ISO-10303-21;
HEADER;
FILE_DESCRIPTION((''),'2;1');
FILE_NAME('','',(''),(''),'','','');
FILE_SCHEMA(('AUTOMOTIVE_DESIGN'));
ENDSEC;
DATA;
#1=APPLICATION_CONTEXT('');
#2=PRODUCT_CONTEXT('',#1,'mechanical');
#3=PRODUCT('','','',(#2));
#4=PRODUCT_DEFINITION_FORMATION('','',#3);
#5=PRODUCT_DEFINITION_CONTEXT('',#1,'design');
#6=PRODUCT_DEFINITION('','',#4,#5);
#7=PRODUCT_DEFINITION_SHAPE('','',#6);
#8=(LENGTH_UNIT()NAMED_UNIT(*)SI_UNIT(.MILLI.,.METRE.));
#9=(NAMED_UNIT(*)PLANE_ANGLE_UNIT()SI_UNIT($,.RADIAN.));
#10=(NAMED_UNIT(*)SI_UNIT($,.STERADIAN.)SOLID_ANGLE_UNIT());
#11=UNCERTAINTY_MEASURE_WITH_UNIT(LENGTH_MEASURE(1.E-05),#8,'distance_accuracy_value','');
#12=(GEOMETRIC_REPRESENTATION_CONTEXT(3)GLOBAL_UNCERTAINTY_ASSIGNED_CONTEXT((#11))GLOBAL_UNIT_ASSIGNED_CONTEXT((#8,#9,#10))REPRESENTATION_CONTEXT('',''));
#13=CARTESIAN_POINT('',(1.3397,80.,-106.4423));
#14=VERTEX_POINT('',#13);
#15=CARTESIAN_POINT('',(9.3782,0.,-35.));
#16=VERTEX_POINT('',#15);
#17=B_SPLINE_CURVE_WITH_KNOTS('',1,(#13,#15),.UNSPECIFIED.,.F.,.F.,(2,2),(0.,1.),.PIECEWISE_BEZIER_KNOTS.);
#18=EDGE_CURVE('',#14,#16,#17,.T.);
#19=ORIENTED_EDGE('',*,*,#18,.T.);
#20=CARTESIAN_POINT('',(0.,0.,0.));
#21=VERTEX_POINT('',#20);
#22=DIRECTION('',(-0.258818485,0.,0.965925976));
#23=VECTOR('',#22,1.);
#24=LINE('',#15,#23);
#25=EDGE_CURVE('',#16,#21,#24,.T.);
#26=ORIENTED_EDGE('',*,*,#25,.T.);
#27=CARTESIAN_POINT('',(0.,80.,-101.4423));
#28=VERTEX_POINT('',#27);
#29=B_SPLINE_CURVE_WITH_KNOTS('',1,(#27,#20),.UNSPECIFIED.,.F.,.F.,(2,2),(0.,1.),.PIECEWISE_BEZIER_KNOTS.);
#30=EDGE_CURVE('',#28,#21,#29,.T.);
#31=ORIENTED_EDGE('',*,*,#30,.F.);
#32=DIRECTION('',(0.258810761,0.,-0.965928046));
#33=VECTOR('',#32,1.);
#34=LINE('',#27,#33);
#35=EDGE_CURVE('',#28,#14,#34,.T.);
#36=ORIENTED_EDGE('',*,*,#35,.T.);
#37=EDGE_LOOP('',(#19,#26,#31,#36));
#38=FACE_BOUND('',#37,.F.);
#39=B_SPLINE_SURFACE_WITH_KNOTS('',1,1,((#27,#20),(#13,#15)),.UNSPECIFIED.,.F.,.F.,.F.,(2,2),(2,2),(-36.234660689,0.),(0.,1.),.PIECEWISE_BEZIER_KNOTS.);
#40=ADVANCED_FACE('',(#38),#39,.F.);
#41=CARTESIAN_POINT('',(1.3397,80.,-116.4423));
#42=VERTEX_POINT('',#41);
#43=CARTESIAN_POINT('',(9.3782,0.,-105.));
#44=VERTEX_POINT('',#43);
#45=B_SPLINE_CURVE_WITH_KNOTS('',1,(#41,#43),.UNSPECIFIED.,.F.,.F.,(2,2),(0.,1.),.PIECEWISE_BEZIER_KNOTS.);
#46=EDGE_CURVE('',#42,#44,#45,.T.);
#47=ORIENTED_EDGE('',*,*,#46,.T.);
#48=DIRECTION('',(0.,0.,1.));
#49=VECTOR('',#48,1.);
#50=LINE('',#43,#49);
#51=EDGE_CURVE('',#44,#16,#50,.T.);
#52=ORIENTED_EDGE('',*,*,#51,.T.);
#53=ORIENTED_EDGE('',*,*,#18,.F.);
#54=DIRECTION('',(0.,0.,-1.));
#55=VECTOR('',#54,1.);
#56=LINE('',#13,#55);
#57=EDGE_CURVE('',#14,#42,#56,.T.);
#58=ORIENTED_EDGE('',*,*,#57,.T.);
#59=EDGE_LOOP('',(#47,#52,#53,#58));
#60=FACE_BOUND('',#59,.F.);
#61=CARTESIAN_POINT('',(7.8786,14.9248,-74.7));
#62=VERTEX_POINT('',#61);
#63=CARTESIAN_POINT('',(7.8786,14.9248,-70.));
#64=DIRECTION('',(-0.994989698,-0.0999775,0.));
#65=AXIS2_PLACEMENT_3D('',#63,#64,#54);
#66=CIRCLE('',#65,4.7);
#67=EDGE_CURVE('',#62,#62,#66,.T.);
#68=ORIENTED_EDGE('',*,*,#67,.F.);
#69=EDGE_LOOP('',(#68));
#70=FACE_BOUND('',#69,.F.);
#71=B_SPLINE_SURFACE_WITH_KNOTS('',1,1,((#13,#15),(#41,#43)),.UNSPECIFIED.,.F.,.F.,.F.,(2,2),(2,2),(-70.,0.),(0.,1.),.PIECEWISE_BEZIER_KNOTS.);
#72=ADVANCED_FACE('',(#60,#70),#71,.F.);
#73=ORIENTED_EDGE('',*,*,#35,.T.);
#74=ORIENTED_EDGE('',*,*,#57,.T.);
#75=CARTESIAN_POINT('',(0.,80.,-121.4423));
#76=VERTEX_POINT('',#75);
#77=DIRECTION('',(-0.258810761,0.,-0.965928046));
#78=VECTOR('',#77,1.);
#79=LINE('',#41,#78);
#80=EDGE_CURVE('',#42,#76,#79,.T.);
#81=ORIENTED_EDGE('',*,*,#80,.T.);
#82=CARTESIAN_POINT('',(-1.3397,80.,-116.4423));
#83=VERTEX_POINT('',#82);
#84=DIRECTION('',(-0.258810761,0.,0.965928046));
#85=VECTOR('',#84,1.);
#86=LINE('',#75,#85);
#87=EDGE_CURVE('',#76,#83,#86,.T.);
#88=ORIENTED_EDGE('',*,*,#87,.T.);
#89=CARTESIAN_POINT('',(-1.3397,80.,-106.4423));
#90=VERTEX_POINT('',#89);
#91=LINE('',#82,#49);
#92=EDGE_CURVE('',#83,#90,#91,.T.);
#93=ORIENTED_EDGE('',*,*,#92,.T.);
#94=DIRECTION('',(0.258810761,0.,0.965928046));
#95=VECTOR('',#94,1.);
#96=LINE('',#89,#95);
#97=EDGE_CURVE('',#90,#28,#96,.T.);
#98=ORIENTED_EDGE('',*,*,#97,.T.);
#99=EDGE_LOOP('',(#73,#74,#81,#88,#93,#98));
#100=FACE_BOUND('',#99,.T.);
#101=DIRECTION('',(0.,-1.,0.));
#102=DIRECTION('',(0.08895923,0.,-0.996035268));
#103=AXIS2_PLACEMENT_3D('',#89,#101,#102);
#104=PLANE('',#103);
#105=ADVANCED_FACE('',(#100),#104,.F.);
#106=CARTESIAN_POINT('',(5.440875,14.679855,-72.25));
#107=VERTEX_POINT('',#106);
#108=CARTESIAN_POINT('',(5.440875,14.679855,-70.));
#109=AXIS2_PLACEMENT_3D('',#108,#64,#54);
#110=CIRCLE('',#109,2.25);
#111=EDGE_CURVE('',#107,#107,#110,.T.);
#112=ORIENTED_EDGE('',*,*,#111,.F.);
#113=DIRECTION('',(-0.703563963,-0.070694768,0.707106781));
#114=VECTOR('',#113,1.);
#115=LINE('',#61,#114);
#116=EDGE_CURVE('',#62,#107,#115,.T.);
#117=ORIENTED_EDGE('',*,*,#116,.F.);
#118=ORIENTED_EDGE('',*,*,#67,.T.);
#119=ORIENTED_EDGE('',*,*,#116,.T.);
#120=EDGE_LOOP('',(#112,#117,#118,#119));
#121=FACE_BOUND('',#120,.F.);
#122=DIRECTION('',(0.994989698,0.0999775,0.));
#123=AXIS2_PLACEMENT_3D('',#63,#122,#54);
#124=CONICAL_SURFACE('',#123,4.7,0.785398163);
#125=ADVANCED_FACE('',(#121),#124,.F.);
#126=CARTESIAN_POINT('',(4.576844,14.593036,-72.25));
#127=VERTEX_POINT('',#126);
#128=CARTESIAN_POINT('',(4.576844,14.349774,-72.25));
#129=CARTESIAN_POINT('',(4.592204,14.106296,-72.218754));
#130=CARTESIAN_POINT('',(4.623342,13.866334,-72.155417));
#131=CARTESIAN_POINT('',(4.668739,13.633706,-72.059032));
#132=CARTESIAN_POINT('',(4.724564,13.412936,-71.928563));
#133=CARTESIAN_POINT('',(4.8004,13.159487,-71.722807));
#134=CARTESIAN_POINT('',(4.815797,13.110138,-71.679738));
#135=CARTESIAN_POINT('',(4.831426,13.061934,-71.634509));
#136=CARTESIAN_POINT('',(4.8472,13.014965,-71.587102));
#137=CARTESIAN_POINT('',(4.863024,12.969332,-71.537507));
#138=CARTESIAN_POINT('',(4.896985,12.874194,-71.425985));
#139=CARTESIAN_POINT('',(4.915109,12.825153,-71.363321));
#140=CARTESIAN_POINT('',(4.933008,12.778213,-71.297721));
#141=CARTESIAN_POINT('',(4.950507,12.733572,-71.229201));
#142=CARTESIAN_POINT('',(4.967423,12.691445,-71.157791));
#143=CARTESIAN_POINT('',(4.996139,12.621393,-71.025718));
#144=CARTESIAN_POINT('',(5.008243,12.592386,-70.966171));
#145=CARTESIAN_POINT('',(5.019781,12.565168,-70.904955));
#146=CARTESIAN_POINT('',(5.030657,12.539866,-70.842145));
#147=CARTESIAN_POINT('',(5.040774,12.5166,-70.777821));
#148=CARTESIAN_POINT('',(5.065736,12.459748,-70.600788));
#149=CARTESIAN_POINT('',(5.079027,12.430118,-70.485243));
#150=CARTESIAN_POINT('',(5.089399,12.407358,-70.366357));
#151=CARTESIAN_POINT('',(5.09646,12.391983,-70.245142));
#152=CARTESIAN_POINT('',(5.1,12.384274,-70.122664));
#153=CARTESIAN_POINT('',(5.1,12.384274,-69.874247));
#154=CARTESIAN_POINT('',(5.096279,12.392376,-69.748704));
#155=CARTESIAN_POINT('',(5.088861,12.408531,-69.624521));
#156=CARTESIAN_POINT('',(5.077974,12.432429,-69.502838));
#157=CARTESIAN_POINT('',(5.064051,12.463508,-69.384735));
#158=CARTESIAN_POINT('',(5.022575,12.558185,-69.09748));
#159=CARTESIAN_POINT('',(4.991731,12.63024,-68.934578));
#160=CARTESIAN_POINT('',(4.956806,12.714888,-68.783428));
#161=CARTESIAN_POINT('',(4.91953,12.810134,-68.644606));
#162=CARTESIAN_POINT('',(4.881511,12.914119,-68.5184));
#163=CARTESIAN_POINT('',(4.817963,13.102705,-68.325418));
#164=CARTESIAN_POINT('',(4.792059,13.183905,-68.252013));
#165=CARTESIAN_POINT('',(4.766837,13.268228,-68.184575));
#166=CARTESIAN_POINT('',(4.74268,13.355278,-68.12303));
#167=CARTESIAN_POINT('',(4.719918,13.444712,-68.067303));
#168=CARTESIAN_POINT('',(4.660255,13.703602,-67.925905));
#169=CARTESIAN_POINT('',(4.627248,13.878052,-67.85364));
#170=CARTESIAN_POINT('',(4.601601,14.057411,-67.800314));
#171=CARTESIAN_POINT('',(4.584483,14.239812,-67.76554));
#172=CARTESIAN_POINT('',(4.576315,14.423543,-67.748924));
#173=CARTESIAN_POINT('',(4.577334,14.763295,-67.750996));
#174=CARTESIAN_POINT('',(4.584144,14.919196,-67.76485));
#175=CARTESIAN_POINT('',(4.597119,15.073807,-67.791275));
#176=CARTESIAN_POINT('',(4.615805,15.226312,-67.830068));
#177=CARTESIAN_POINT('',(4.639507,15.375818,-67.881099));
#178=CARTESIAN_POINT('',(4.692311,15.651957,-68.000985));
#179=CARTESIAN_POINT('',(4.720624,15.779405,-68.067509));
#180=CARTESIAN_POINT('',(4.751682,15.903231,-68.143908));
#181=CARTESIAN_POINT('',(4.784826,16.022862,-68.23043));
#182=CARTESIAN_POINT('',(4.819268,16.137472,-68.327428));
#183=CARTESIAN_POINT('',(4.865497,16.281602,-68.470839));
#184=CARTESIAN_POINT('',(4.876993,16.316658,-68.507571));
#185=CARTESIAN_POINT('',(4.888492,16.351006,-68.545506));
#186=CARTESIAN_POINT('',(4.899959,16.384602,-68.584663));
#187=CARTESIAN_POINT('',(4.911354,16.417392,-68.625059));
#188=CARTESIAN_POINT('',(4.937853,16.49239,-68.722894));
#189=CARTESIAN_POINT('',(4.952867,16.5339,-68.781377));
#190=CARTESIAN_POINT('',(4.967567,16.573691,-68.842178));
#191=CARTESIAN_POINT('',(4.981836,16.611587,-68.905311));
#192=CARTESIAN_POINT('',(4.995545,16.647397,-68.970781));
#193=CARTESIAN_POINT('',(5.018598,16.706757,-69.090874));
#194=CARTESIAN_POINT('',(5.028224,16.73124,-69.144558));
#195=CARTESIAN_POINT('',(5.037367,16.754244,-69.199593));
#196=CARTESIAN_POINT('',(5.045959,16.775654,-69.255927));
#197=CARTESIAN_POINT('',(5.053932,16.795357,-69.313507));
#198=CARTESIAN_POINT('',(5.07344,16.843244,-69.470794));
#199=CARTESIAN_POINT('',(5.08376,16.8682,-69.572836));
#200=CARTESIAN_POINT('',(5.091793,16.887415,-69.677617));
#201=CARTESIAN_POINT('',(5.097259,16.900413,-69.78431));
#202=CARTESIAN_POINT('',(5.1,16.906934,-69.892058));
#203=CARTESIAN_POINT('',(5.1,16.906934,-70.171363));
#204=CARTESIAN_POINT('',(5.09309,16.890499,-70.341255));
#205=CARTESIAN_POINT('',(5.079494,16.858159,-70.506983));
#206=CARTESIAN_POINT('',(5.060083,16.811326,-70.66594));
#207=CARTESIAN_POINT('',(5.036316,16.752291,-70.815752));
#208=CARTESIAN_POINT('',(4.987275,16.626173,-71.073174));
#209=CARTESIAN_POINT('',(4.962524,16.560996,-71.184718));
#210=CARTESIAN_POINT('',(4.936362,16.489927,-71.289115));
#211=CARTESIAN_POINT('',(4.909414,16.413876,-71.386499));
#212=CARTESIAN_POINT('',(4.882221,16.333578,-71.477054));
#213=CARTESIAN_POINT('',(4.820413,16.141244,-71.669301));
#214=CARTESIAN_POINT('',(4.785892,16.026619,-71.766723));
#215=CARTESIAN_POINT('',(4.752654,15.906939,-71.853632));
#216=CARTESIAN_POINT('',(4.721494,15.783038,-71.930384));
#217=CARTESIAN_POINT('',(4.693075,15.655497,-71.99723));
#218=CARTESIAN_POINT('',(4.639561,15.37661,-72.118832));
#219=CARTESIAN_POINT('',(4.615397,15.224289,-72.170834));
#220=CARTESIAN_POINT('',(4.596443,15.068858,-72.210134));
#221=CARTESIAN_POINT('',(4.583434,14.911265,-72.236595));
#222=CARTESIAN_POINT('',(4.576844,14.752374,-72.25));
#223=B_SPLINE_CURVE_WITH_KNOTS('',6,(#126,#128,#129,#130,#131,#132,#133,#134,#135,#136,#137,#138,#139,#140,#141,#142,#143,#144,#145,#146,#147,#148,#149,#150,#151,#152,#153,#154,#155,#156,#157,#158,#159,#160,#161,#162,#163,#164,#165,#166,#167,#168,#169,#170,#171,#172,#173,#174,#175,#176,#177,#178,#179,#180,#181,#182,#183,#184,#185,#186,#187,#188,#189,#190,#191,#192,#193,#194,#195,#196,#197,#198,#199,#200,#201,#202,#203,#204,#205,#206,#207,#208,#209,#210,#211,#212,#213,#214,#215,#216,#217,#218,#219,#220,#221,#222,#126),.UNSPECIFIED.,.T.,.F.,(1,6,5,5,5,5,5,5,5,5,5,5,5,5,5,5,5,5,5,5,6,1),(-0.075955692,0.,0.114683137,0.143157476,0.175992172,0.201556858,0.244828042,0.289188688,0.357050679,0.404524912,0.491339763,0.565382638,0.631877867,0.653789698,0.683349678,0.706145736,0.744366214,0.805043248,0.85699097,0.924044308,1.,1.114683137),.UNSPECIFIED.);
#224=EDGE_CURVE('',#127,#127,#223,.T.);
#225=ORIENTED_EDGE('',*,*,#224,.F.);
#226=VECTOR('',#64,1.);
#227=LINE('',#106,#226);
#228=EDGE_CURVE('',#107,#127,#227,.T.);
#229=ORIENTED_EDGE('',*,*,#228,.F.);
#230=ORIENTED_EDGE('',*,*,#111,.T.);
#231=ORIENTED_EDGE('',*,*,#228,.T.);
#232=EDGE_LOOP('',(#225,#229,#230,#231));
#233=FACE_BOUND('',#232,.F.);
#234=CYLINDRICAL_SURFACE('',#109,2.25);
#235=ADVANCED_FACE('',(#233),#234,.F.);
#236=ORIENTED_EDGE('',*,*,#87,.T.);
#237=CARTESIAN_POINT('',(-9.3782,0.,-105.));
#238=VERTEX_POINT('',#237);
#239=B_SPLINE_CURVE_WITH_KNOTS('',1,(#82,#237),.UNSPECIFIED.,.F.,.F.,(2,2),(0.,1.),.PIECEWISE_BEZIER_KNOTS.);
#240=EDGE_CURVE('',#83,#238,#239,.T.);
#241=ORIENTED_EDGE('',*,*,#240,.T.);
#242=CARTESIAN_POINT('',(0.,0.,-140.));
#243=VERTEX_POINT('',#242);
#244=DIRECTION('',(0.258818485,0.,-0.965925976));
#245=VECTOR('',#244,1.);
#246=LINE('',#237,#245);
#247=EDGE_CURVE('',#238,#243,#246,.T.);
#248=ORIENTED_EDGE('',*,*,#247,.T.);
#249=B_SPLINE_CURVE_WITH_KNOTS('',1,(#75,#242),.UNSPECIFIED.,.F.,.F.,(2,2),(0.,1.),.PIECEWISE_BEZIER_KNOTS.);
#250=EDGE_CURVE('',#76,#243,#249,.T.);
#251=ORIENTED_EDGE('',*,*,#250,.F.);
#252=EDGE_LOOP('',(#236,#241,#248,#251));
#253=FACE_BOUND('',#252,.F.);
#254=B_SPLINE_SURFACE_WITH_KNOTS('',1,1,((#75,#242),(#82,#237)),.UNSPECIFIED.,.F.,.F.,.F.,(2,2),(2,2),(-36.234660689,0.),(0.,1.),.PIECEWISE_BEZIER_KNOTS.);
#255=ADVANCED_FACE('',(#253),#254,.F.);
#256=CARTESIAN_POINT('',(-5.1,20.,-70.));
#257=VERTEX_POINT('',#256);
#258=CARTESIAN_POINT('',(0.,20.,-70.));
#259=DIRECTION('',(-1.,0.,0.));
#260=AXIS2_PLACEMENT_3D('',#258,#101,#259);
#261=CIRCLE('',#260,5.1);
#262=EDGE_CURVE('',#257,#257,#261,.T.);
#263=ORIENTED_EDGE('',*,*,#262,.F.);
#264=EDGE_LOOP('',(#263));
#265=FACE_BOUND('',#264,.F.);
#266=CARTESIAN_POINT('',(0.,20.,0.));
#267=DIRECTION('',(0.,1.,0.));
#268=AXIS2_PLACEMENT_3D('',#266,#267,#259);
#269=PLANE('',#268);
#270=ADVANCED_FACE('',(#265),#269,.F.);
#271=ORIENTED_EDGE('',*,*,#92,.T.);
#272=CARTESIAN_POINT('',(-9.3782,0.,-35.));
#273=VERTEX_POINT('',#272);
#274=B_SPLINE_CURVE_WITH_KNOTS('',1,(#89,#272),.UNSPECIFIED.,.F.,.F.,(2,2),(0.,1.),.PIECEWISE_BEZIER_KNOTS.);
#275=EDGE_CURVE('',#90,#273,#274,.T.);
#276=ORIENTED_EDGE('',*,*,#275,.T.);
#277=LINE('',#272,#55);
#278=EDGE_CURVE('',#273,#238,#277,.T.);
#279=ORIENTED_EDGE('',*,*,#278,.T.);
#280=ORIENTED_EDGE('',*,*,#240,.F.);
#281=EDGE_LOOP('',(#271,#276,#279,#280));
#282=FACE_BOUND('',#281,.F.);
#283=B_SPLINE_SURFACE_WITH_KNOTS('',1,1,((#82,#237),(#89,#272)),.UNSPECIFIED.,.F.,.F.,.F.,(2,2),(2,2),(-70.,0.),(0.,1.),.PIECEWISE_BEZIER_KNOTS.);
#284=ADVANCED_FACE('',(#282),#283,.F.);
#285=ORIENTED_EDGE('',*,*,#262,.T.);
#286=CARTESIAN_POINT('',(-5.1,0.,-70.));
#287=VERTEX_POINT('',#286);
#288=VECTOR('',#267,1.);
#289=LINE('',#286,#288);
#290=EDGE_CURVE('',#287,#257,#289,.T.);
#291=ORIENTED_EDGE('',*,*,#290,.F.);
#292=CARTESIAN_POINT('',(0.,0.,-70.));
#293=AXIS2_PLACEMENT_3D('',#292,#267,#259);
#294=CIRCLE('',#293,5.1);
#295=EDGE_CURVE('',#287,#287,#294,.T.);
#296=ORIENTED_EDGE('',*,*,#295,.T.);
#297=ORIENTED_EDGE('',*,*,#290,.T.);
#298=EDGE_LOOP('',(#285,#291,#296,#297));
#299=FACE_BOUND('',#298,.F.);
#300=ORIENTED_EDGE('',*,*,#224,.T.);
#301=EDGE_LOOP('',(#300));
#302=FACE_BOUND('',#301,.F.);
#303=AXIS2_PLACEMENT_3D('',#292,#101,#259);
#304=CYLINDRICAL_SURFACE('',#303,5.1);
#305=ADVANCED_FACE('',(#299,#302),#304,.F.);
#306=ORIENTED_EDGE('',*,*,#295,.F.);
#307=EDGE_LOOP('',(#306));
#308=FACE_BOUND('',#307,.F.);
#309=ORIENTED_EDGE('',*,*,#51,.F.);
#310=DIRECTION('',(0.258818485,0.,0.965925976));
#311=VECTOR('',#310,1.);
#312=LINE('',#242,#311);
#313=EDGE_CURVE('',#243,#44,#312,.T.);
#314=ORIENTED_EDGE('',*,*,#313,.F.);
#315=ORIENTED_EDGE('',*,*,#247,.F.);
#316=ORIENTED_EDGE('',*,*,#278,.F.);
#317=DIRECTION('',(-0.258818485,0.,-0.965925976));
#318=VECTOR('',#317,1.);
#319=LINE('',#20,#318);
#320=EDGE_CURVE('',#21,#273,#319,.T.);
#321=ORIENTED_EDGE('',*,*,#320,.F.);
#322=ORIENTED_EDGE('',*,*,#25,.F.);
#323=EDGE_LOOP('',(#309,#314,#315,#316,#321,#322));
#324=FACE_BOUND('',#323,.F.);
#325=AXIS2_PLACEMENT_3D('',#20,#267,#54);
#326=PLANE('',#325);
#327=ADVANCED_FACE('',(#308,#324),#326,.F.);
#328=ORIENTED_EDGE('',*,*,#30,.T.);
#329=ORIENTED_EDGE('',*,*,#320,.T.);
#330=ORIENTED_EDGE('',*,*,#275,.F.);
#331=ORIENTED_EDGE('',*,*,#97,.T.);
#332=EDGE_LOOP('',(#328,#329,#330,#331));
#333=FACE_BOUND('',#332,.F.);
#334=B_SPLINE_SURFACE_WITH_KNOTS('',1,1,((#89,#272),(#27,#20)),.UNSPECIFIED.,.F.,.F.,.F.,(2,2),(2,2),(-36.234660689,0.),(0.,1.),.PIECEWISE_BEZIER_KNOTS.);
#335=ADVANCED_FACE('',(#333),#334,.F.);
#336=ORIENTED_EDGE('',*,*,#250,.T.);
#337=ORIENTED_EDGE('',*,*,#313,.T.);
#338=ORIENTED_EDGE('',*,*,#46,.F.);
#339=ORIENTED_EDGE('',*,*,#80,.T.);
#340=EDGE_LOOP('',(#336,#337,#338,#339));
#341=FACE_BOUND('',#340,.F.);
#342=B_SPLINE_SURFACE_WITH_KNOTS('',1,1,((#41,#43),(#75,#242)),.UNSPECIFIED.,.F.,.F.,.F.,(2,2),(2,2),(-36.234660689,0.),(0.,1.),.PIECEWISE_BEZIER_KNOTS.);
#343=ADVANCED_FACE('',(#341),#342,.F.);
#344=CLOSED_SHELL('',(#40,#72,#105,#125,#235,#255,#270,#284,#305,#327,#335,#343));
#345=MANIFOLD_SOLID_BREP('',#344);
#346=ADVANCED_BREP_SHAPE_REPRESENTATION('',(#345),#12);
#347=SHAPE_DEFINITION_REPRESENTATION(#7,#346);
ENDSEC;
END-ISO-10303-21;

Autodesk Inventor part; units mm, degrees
ref_plane "XY Plane" through (0, 0, 0) normal (0, 0, 1) x (1, 0, 0)
sketch "草圖1" plane through (0, 0, 0) normal (1, 0, 0) x (0, 1, 0)
  line L0 (0, 0) -> (0, -140)
  line L1 (0, -140) -> (80, -121.4423)
  line L2 (80, -121.4423) -> (80, -101.4423)
  line L3 (80, -101.4423) -> (0, 0)
  line L4 (-21.2222, 0) -> (127.3329, 0) projected
  line L5 (0, -140) -> (106.1108, -140)
  dimension "d0" = 80
  dimension "d1" = 140
  dimension "d4" = 20
  dimension "d5" = 51.74
  dimension "d38" = 13.06
sketch "草圖2" plane through (0, 0, 0) normal (0, 1, 0) x (-1, 0, 0)
  line L0 (0, -164.5545) -> (0, 20.7772)
  line L1 (0, 0) -> (9.3782, -35)
  line L2 (9.3782, -35) -> (9.3782, -105)
  line L3 (9.3782, -105) -> (0, -140)
  line L4 (0, -140) -> (-9.3782, -105)
  line L5 (-9.3782, -105) -> (-9.3782, -35)
  line L6 (-9.3782, -35) -> (0, 0)
  point P0 (9.3782, -70)
  point P1 (-9.3782, -70)
  dimension "d34" = 140
  dimension "d35" = 70
  dimension "d63" = 30
ref_plane "工作平面1" through (0, 40, 0) normal (0, 1, 0) x (-1, 0, 0)
sketch "草圖3" plane through (0, 40, 0) normal (0, 1, 0) x (-1, 0, 0)
  line L0 (0, -140) -> (0, -121.4423) construction
  line L1 (0, -101.4423) -> (0, 0) construction
  arc A0 (0, -130.7211) -> (0, -50.7211) centre (-157.5, -90.7211) ccw
  arc A1 (0, -50.7211) -> (0, -130.7211) centre (157.5, -90.7211) ccw
  point P0 (-5, -90.7211)
  point P1 (5, -90.7211)
  dimension "d8" = 10
ref_plane "工作平面2" through (0, 80, -121.4423) normal (0, 1, 0) x (0, 0, 1)
sketch "草圖4" plane through (0, 80, -121.4423) normal (0, 1, 0) x (0, 0, 1)
  line L0 (0, 0) -> (20, 0) construction
  line L1 (0, 0) -> (5, -1.3397)
  line L2 (5, -1.3397) -> (15, -1.3397)
  line L3 (15, -1.3397) -> (20, 0)
  line L4 (20, 0) -> (15, 1.3397)
  line L5 (15, 1.3397) -> (5, 1.3397)
  line L6 (5, 1.3397) -> (0, 0)
  line L7 (0, 0) -> (23.7268, 0)
  point P0 (121.4423, 0)
  point P1 (10, 1.3397)
  point P2 (10, -1.3397)
  dimension "d36" = 20
  dimension "d37" = 10
  dimension "d62" = 30
loft "Loft3" add profiles "草圖4", "草圖2"
sketch "草圖5" plane through (0, 0, 0) normal (0, 1, 0) x (-1, 0, 0)
  circle A0 centre (0, -70) radius 5.1
  line L0 (0, -168) -> (0, 28) projected
  line L1 (-220.5, 0) -> (220.5, 0) projected
  point P0 (0, 0)
  dimension "d17" = 10.2
  dimension "d18" = 70
extrude "擠出1" cut sketch "草圖5" along normal blind 20
sketch "Sketch12" plane through (9.3782, 0, -35) normal (0.9949897, 0.0999775, 0) x (0, 0, -1)
  line L0 (0, 0) -> (70, 0) projected
  line L1 (35, 0) -> (35, 15)
  point P0 (-35, 0.9376)
  dimension "d69" = 15
hole "Hole3" at (7.8786, 14.9248, -70) direction (-0.9949897, -0.0999775, 0) diameter 4.5 depth 10 tip angle 118 countersink diameter 9.4 countersink angle 90 clearance for "Countersunk Flat Head Screw ISO 2009/7046" size "M4" standard "ISO"
sketch "Sketch9" plane through (9.3782, 0, -35) normal (0.9949897, 0.0999775, 0) x (0, 0, -1)
  line L0 (86.4423, 80.5368) -> (105, 0.9376) projected
  line L1 (66.4423, 80.5368) -> (71.4423, 80.4028) projected
  line L2 (71.4423, 80.4028) -> (81.4423, 80.4028) projected
  line L3 (81.4423, 80.4028) -> (86.4423, 80.5368) projected
  line L4 (66.4423, 80.5368) -> (-35, 0.9376) projected
  line L5 (-35, 0.9376) -> (0, 0) projected
  line L6 (0, 0) -> (70, 0) projected
  line L7 (70, 0) -> (105, 0.9376) projected
sketch "Sketch7" plane through (9.3782, 0, -35) normal (0.9949897, 0.0999775, 0) x (0, 0, -1)
  line L0 (0, 0) -> (70, 0) projected
  line L1 (0, 0) -> (70, 0) projected
  line L2 (40, 0) -> (30, 0) projected
  line L3 (71.4423, 80.4028) -> (66.4423, 80.5368) projected
  line L4 (66.4423, 80.5368) -> (-35, 0.9376) projected
  line L5 (105, 0.9376) -> (86.4423, 80.5368) projected
  line L6 (71.4423, 80.4028) -> (81.4423, 80.4028) projected
  line L7 (-35, 0.9376) -> (0, 0) projected
  line L8 (70, 0) -> (105, 0.9376) projected
  line L9 (86.4423, 80.5368) -> (81.4423, 80.4028) projected
  point P0 (35, 15)
  dimension "d39" = 15
sketch "Sketch8" plane through (9.3782, 0, -35) normal (0.9949897, 0.0999775, 0) x (0, 0, -1)
  circle A0 centre (55, 40) radius 2
  line L0 (0, 0) -> (70, 0) projected
  point P0 (-35, 0.9376)
  dimension "d49" = 40
  dimension "d50" = 90
  dimension "d51" = 4
equation "\"d35\" = 0.5 * d34"
equation "\"d37\" = 0.5 * d36"
properties part number "canard" material "ABS Plastic"
